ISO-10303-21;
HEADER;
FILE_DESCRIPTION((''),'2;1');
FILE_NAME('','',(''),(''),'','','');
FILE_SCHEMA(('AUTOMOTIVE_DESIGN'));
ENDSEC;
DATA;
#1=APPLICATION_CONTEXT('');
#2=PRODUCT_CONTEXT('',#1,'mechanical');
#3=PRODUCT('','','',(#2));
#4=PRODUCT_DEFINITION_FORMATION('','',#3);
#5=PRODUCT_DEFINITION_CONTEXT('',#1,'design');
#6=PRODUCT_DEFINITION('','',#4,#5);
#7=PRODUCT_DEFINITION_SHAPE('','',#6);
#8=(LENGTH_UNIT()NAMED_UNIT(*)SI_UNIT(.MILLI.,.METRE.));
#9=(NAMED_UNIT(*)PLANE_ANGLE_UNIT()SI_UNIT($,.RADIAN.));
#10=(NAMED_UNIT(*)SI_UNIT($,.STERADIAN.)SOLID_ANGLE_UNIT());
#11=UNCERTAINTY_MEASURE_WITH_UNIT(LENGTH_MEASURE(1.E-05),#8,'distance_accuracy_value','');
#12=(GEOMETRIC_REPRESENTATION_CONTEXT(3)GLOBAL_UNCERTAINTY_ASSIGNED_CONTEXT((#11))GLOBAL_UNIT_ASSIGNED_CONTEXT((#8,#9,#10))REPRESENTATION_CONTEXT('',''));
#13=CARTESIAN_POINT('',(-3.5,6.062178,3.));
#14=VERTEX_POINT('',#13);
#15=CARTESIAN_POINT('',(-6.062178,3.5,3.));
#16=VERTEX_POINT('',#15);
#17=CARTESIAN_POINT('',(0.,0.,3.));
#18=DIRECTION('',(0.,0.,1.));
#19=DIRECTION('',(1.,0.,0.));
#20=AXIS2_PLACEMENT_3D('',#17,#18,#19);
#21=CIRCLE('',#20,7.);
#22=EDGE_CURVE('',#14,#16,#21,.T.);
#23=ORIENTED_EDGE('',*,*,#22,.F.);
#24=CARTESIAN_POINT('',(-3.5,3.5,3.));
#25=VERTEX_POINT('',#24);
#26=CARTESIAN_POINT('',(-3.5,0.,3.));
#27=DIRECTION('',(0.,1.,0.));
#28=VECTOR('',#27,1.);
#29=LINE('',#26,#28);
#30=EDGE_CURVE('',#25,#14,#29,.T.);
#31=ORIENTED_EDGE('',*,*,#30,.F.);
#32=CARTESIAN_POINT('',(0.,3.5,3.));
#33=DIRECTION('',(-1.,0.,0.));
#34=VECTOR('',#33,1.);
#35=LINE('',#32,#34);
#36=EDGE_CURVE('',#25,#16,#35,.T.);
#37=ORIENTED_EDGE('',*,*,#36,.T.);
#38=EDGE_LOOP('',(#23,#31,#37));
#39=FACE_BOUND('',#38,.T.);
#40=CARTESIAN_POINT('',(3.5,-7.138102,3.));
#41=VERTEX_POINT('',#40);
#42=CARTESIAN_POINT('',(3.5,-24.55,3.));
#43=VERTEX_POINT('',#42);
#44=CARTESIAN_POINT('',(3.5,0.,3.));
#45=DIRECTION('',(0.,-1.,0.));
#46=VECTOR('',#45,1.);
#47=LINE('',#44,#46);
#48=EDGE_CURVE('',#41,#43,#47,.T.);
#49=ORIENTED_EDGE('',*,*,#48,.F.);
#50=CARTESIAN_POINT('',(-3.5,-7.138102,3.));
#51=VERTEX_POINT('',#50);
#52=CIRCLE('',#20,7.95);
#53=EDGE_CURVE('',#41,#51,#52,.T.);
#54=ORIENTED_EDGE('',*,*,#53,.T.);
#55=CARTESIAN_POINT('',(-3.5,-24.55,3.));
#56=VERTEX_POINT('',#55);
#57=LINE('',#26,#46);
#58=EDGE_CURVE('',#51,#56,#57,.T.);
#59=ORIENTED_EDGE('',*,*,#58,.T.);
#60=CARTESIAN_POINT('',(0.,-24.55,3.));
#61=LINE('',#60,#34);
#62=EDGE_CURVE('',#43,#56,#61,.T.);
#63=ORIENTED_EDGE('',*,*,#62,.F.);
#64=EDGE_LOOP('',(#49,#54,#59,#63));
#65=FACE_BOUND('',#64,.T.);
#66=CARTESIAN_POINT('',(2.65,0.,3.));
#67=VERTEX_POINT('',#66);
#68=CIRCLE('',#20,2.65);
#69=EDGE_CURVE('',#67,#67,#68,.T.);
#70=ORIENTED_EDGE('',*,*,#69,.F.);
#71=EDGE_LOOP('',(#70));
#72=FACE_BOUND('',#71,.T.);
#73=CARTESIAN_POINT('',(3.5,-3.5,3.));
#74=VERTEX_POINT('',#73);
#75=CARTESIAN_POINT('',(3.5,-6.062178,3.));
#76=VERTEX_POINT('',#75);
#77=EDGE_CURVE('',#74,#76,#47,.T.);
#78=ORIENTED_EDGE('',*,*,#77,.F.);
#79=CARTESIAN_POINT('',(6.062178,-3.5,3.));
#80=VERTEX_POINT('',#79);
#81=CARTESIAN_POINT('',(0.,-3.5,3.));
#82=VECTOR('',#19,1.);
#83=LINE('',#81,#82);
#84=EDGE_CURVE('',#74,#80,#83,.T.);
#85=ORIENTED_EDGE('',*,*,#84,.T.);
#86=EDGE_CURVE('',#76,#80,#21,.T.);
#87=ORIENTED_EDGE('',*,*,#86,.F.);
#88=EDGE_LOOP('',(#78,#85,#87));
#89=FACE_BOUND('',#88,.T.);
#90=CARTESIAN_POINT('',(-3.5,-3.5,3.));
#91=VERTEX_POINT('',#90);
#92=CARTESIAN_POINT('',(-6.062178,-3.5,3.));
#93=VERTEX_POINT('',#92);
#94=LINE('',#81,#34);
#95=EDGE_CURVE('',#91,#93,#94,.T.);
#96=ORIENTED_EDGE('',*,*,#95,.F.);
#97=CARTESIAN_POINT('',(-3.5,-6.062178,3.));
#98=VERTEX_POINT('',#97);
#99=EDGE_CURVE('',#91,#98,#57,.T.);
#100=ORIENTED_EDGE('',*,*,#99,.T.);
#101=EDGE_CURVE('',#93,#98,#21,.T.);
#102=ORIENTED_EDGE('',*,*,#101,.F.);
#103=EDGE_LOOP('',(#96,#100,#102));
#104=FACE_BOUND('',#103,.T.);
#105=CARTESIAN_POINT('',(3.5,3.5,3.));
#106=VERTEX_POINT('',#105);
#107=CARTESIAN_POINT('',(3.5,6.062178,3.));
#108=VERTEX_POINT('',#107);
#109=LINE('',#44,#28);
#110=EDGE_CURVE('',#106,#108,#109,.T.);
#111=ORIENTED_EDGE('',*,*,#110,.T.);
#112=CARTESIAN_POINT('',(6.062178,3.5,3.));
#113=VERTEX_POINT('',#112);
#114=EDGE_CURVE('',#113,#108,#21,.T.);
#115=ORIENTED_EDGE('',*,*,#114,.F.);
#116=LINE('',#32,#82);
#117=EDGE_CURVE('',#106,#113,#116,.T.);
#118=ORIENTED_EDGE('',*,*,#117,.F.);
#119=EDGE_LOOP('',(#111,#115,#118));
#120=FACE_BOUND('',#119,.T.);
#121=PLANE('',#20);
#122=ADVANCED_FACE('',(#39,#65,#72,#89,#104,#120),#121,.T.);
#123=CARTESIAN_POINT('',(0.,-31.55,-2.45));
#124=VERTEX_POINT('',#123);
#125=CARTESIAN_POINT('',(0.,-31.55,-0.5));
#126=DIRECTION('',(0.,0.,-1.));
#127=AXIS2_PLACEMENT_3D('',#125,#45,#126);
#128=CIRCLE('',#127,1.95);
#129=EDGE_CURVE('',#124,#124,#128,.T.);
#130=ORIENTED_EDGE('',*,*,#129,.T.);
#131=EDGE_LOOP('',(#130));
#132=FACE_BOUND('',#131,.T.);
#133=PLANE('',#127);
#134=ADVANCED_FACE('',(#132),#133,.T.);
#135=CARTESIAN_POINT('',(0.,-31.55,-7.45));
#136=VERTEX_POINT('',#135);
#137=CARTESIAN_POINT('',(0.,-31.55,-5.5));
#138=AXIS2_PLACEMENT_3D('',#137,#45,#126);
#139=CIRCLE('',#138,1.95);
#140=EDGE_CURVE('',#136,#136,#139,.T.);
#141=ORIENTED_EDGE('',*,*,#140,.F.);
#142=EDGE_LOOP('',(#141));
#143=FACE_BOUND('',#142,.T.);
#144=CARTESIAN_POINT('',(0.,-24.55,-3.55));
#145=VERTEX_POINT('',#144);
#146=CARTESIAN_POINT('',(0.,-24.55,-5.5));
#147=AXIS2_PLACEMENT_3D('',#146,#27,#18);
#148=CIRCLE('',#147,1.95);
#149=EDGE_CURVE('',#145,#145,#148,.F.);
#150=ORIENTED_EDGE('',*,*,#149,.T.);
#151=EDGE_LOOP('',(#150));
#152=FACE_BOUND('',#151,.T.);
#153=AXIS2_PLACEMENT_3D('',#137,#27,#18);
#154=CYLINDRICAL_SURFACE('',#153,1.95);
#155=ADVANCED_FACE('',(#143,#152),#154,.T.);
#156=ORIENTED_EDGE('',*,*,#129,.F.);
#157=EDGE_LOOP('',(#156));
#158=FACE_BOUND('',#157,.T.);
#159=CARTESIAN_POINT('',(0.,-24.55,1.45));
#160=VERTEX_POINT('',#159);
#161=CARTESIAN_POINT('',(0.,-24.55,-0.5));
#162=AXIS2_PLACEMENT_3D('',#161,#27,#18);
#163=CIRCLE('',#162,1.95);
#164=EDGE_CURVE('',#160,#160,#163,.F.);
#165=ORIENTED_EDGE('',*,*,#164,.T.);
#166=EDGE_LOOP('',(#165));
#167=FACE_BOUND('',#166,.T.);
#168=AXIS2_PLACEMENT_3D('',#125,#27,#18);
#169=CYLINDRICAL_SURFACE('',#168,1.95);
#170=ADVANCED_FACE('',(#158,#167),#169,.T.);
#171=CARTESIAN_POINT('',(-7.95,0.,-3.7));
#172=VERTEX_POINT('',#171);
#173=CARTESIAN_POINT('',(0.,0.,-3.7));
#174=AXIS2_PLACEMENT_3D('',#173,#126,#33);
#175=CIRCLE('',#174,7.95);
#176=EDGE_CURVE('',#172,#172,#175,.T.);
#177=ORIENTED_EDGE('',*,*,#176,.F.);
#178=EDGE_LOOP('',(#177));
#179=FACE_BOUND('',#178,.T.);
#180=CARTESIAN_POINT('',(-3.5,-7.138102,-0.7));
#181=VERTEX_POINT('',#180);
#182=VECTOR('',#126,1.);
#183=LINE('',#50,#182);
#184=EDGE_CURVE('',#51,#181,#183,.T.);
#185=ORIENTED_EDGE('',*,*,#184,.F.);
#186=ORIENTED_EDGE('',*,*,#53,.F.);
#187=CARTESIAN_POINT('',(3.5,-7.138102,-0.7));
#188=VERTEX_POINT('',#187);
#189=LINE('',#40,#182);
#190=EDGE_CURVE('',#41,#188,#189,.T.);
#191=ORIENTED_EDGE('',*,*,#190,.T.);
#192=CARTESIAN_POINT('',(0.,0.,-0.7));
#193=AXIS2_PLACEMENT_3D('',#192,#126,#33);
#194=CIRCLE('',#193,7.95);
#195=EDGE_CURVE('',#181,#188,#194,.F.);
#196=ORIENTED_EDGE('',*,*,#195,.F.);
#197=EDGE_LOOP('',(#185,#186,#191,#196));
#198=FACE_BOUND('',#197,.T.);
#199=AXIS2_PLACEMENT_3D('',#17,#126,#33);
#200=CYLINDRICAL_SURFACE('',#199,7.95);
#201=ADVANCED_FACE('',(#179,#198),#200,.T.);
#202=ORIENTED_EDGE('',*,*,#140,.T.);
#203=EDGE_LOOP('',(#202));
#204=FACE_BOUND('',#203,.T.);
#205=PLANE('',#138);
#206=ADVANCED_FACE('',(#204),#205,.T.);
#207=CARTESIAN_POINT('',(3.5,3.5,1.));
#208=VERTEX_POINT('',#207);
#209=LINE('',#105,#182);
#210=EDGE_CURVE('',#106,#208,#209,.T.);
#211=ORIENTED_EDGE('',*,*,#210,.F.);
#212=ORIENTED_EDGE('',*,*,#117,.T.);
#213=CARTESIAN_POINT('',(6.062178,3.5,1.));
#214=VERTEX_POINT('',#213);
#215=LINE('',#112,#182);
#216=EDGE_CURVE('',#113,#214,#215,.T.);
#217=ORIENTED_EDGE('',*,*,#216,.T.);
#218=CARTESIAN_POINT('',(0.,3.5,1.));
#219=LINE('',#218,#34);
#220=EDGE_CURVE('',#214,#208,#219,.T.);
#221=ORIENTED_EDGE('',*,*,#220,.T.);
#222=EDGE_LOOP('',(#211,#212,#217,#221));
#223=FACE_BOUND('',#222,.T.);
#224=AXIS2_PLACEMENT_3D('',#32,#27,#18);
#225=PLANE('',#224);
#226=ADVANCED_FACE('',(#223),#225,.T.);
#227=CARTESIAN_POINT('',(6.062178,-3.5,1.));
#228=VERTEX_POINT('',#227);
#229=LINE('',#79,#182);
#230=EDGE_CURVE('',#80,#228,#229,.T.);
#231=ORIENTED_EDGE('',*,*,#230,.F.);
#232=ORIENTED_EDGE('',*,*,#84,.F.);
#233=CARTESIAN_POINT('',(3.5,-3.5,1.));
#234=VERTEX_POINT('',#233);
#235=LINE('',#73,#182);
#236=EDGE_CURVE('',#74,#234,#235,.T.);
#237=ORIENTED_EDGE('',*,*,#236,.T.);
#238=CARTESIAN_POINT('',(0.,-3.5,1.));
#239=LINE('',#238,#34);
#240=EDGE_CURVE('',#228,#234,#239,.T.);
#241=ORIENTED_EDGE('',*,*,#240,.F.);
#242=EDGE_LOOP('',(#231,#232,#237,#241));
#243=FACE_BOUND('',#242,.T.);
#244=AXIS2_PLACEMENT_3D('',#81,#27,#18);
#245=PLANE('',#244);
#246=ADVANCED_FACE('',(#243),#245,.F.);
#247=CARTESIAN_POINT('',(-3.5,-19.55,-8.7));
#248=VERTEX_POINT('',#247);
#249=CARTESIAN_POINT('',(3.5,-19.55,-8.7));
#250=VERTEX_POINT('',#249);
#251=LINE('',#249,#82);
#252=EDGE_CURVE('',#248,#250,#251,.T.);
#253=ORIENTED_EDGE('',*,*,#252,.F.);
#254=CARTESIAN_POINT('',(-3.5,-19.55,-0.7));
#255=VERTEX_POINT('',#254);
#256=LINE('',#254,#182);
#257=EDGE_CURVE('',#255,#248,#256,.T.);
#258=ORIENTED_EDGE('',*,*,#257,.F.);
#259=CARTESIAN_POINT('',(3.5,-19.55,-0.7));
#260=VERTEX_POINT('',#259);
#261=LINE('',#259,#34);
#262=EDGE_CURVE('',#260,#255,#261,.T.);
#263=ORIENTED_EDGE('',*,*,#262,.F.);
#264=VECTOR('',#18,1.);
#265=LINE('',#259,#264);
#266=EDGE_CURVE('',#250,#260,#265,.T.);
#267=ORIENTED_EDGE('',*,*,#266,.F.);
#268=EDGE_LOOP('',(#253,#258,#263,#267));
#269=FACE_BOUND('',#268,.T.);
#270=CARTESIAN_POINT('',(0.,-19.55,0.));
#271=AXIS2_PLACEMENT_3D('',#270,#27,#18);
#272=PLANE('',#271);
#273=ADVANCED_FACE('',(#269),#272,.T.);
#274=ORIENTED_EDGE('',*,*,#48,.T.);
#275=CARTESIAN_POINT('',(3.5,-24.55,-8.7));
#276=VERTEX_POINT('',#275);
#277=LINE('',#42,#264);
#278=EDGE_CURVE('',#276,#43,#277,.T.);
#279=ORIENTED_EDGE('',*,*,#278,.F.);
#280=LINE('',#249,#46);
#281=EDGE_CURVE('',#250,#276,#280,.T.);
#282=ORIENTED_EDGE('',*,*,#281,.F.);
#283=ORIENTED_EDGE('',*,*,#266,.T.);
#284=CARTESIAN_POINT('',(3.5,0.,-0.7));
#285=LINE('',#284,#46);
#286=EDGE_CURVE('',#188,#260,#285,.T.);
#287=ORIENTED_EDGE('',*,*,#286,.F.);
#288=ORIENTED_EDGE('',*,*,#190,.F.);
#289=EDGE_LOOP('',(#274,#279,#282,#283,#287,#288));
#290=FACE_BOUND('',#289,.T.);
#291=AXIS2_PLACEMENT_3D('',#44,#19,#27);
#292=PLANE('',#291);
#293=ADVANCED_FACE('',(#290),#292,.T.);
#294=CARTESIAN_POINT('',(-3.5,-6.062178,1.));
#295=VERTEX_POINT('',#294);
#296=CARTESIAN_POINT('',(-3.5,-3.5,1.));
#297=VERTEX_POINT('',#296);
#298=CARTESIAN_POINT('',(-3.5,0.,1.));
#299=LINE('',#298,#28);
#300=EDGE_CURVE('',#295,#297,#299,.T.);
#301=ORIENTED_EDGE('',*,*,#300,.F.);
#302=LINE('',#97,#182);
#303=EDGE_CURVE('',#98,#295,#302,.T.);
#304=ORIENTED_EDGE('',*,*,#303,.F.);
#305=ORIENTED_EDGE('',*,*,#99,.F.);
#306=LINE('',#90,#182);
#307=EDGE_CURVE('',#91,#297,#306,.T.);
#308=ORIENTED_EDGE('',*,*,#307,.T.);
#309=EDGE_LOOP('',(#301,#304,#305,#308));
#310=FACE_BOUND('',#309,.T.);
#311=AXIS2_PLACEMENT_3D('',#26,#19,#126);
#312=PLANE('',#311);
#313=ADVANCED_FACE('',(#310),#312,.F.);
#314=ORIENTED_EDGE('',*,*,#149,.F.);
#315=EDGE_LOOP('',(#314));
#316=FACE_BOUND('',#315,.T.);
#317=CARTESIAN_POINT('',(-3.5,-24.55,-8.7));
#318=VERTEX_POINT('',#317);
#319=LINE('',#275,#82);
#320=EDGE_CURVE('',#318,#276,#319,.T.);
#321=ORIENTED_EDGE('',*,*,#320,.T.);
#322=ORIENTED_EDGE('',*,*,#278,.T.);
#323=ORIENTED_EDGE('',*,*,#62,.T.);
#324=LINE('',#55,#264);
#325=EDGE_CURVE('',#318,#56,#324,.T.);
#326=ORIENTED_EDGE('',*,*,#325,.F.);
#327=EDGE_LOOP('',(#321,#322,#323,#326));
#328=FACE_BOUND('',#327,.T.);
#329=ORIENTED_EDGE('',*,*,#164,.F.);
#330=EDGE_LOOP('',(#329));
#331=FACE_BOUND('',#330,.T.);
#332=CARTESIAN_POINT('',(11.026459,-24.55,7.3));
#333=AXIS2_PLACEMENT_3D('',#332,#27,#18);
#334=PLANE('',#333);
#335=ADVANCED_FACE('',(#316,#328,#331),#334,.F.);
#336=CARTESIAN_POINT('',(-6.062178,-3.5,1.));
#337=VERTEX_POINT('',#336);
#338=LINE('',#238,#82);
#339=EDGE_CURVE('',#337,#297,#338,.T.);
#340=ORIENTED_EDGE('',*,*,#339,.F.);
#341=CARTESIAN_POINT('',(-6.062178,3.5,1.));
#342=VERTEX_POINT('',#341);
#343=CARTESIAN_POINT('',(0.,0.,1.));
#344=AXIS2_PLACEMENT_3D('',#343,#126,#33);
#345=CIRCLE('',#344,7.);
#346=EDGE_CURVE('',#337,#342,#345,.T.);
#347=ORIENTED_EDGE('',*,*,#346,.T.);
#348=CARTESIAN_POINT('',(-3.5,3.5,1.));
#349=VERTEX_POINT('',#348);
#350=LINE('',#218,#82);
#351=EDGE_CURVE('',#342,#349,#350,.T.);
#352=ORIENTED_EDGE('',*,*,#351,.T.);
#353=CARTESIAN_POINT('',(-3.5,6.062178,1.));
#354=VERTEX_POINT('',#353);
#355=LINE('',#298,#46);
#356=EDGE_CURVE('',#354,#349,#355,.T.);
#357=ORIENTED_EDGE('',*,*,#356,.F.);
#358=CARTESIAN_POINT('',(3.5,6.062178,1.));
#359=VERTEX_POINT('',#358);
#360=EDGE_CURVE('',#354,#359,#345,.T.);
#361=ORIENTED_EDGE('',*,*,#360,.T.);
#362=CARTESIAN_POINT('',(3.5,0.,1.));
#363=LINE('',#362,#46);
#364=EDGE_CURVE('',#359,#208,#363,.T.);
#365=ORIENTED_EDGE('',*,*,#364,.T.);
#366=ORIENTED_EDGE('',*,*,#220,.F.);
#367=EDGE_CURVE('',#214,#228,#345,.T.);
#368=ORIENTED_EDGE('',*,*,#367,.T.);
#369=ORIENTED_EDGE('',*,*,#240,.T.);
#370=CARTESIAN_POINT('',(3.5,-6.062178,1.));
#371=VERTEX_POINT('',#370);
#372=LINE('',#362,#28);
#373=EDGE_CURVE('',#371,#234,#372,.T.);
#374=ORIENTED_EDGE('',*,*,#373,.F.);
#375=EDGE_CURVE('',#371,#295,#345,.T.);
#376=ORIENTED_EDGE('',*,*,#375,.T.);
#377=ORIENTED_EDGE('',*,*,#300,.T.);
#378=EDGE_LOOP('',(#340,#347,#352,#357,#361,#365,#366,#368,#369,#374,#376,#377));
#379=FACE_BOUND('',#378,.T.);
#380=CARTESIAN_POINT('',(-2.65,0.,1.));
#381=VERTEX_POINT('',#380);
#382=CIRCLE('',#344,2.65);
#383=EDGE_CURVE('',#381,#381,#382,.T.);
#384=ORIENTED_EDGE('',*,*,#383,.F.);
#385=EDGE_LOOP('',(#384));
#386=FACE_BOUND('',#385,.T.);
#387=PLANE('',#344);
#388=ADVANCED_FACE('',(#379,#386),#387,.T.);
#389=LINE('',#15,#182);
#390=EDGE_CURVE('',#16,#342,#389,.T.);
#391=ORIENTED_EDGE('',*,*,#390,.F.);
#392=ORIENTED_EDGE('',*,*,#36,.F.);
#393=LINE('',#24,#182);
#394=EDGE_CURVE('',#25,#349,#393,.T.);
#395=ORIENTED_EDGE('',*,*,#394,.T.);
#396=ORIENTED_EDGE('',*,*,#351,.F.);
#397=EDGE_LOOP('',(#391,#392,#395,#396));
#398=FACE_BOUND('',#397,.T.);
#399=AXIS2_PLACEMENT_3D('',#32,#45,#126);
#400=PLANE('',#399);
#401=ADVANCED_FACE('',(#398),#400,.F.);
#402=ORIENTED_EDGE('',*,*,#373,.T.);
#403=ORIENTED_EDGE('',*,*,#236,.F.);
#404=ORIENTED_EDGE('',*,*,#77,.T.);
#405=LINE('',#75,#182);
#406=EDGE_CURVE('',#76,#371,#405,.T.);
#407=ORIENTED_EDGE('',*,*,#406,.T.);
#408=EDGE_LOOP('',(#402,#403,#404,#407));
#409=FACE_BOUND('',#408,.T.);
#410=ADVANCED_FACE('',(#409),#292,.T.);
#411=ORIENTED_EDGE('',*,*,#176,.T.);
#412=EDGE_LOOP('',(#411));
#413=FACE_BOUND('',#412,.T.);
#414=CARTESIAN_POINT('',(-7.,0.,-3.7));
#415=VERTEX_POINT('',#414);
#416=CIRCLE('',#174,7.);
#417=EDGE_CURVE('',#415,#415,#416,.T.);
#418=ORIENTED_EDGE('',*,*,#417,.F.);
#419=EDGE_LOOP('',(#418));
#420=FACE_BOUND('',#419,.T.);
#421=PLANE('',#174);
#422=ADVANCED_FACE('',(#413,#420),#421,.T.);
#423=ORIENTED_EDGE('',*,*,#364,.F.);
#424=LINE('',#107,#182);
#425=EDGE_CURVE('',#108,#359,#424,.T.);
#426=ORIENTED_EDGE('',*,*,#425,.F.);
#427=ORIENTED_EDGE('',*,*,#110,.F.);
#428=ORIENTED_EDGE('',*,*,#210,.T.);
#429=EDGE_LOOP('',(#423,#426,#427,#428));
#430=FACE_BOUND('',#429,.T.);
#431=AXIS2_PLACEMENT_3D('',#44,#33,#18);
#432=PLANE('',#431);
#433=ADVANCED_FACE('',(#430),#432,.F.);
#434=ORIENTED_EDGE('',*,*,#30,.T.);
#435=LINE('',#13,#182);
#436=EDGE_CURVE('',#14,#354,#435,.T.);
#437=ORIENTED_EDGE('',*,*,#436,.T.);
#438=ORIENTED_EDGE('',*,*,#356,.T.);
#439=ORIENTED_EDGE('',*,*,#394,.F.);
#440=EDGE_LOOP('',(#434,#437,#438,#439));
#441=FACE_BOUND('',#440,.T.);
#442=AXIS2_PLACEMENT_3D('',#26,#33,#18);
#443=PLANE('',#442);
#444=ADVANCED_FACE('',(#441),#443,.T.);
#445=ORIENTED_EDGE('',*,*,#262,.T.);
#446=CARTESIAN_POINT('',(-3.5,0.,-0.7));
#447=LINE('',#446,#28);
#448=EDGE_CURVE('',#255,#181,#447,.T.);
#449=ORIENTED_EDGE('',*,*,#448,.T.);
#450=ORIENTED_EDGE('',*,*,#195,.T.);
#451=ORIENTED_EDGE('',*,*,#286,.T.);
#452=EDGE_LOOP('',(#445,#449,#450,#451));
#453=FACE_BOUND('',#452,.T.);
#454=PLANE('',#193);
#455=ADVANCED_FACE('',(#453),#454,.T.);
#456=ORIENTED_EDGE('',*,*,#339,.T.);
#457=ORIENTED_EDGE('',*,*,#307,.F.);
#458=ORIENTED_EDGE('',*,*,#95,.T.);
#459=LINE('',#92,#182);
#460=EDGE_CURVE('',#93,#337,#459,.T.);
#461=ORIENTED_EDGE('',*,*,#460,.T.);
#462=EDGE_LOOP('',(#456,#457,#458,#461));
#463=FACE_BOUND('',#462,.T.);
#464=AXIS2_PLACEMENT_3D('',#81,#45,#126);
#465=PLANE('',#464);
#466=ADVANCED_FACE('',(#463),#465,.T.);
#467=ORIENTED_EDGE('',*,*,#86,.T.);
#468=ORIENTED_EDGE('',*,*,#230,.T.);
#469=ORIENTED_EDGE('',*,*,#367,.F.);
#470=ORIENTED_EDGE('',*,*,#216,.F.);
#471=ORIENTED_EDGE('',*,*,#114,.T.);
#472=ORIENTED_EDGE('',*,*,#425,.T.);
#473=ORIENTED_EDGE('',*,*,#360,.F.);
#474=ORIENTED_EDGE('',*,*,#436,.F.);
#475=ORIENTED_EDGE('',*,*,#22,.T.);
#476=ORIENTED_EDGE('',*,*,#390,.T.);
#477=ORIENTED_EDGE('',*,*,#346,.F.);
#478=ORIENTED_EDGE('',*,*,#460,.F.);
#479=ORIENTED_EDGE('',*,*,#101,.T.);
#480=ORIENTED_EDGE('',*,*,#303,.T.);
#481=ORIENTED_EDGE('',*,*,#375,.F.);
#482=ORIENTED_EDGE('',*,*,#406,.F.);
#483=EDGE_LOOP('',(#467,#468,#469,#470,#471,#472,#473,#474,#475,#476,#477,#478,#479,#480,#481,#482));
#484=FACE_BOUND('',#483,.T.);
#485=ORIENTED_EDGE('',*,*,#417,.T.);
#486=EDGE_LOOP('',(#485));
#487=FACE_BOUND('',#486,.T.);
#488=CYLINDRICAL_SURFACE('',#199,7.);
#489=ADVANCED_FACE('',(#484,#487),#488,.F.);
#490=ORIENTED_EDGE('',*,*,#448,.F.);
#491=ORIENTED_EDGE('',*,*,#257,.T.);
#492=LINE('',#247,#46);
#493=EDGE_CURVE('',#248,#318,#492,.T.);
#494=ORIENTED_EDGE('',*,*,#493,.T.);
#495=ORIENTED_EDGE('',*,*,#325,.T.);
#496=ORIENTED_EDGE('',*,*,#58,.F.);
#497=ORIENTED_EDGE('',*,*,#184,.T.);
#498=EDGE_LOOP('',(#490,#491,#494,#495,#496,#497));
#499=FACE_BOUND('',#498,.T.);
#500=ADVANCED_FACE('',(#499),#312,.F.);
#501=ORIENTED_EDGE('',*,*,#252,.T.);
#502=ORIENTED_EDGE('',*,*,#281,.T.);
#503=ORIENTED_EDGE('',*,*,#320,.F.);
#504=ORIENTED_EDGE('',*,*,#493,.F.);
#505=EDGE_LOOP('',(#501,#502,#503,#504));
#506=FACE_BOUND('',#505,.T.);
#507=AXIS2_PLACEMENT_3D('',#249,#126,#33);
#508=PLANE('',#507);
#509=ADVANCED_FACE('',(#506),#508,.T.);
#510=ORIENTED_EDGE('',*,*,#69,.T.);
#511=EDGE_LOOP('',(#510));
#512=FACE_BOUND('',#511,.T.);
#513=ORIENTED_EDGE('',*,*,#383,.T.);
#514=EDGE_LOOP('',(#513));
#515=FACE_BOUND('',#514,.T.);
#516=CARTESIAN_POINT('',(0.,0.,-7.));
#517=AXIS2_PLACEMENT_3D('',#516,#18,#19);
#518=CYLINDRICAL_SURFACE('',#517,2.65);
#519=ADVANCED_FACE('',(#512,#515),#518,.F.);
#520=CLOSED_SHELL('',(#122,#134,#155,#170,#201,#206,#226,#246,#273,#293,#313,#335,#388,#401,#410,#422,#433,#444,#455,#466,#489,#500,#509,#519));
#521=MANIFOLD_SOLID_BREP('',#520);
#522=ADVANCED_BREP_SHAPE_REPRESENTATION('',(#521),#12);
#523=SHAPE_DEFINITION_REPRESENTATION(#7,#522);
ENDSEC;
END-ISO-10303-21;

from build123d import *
from build123d.topology import SkipClean

# Parameters (mm, degrees)
SKETCH1_R            = 1.5
BOSS_EXTRUDE4_DEPTH  = 3
BOSS_EXTRUDE5_START  = 3
SKETCH3_R            = 7.95
SKETCH3_R_2          = 1.5
BOSS_EXTRUDE5_DEPTH  = 3
SKETCH4_R            = 2.5
CUT_EXTRUDE1_DEPTH   = 1.5
SKETCH5_R            = 7
CUT_EXTRUDE2_DEPTH   = 4
SKETCH6_R            = 7.95
CUT_EXTRUDE3_DEPTH   = 1
SKETCH7_R            = 2.5
CUT_EXTRUDE4_DEPTH   = 0.5
BOSS_EXTRUDE6_START  = 0.7
SKETCH8_R            = 7.95
SKETCH8_R_2          = 7
BOSS_EXTRUDE6_DEPTH  = 0.7
BOSS_EXTRUDE8_START  = 0.7
SKETCH9_R            = 7.95
SKETCH9_R_2          = 1.5
BOSS_EXTRUDE8_DEPTH  = 0.7
BOSS_EXTRUDE9_START  = 0.7
BOSS_EXTRUDE9_DEPTH  = 0.7
SKETCH15_R           = 7
SKETCH15_R_2         = 4.949747468
BOSS_EXTRUDE12_DEPTH = 5.7
SKETCH16_W           = 7
SKETCH16_H           = 7
CUT_EXTRUDE7_DEPTH   = 5.7
SKETCH17_W           = 21.103619628
SKETCH17_H           = 19.457314619
CUT_EXTRUDE8_DEPTH   = 10
SKETCH18_W           = 7
SKETCH18_H           = 8
BOSS_EXTRUDE13_DEPTH = 5
SKETCH19_R           = 1.95
BOSS_EXTRUDE14_DEPTH = 7
SKETCH20_R           = 2.65
CUT_EXTRUDE9_DEPTH   = 10


with BuildPart() as part:
    # Sketch1 → Boss-Extrude4 (new body)
    with BuildSketch(Plane.XY):
        with BuildLine():
            Line((-3.5, -7.138101989), (-3.5, -27.861898011))
            ThreePointArc((-3.5, -27.861898011), (0, -42.95), (3.5, -27.861898011))
            Line((3.5, -27.861898011), (3.5, -7.138101989))
            ThreePointArc((3.5, -7.138101989), (0, 7.95), (-3.5, -7.138101989))
        make_face()
        with BuildLine():
            Line((-3.5, 6.062177826), (-3.5, 3.5))
            Line((-3.5, 3.5), (-6.062177826, 3.5))
            ThreePointArc((-6.062177826, 3.5), (-4.949747468, 4.949747468), (-3.5, 6.062177826))
        make_face(mode=Mode.SUBTRACT)
        with BuildLine():
            Line((3.5, 3.5), (3.5, 6.062177826))
            ThreePointArc((3.5, 6.062177826), (4.949747468, 4.949747468), (6.062177826, 3.5))
            Line((6.062177826, 3.5), (3.5, 3.5))
        make_face(mode=Mode.SUBTRACT)
        Circle(SKETCH1_R, mode=Mode.SUBTRACT)
        with BuildLine():
            Line((-6.062177826, -3.5), (-3.5, -3.5))
            Line((-3.5, -3.5), (-3.5, -6.062177826))
            ThreePointArc((-3.5, -6.062177826), (-4.949747468, -4.949747468), (-6.062177826, -3.5))
        make_face(mode=Mode.SUBTRACT)
        with BuildLine():
            Line((3.5, -3.5), (6.062177826, -3.5))
            ThreePointArc((6.062177826, -3.5), (4.949747468, -4.949747468), (3.5, -6.062177826))
            Line((3.5, -6.062177826), (3.5, -3.5))
        make_face(mode=Mode.SUBTRACT)
        with BuildLine():
            ThreePointArc((3.5, -28.937822174), (4.949747468, -30.050252532), (6.062177826, -31.5))
            Line((6.062177826, -31.5), (3.5, -31.5))
            Line((3.5, -31.5), (3.5, -28.937822174))
        make_face(mode=Mode.SUBTRACT)
        with BuildLine():
            Line((-3.5, -28.937822174), (-3.5, -31.5))
            Line((-3.5, -31.5), (-6.062177826, -31.5))
            ThreePointArc((-6.062177826, -31.5), (-4.949747468, -30.050252532), (-3.5, -28.937822174))
        make_face(mode=Mode.SUBTRACT)
        with BuildLine():
            ThreePointArc((-3.5, -41.062177826), (-4.949747468, -39.949747468), (-6.062177826, -38.5))
            Line((-6.062177826, -38.5), (-3.5, -38.5))
            Line((-3.5, -38.5), (-3.5, -41.062177826))
        make_face(mode=Mode.SUBTRACT)
        with BuildLine():
            ThreePointArc((6.062177826, -38.5), (4.949747468, -39.949747468), (3.5, -41.062177826))
            Line((3.5, -41.062177826), (3.5, -38.5))
            Line((3.5, -38.5), (6.062177826, -38.5))
        make_face(mode=Mode.SUBTRACT)
        with Locations((0, -35)):
            Circle(SKETCH1_R, mode=Mode.SUBTRACT)
    extrude(amount=BOSS_EXTRUDE4_DEPTH)

    # Sketch3 → Boss-Extrude5 (add)
    # profile 1 of 2: a face of its own
    with SkipClean():  # the faces are left unmerged after this step: merging them gives an invalid solid
        with BuildSketch(Plane(origin=(0, 0, 0), x_dir=(-1, 0, 0), z_dir=(0, 0, -1)).offset(BOSS_EXTRUDE5_START)):
            Circle(SKETCH3_R)
            with BuildLine():
                Line((3.5, 3.5), (3.5, 6.062177826))
                ThreePointArc((3.5, 6.062177826), (4.949747468, 4.949747468), (6.062177826, 3.5))
                Line((6.062177826, 3.5), (3.5, 3.5))
            make_face(mode=Mode.SUBTRACT)
            with BuildLine():
                Line((3.5, -3.5), (6.062177826, -3.5))
                ThreePointArc((6.062177826, -3.5), (4.949747468, -4.949747468), (3.5, -6.062177826))
                Line((3.5, -6.062177826), (3.5, -3.5))
            make_face(mode=Mode.SUBTRACT)
            with BuildLine():
                Line((-3.5, -3.5), (-3.5, -6.062177826))
                ThreePointArc((-3.5, -6.062177826), (-4.949747468, -4.949747468), (-6.062177826, -3.5))
                Line((-6.062177826, -3.5), (-3.5, -3.5))
            make_face(mode=Mode.SUBTRACT)
            with BuildLine():
                Line((-3.5, 3.5), (-6.062177826, 3.5))
                ThreePointArc((-6.062177826, 3.5), (-4.949747468, 4.949747468), (-3.5, 6.062177826))
                Line((-3.5, 6.062177826), (-3.5, 3.5))
            make_face(mode=Mode.SUBTRACT)
            Circle(SKETCH3_R_2, mode=Mode.SUBTRACT)
        # profile 2 of 2: a face of its own
        with BuildSketch(Plane(origin=(0, 0, 0), x_dir=(-1, 0, 0), z_dir=(0, 0, -1)).offset(BOSS_EXTRUDE5_START)):
            with Locations((0, -35)):
                Circle(SKETCH3_R)
            with BuildLine():
                Line((-3.5, -38.5), (-3.5, -41.062177826))
                ThreePointArc((-3.5, -41.062177826), (-4.949747468, -39.949747468), (-6.062177826, -38.5))
                Line((-6.062177826, -38.5), (-3.5, -38.5))
            make_face(mode=Mode.SUBTRACT)
            with BuildLine():
                Line((-3.5, -31.5), (-6.062177826, -31.5))
                ThreePointArc((-6.062177826, -31.5), (-4.949747468, -30.050252532), (-3.5, -28.937822174))
                Line((-3.5, -28.937822174), (-3.5, -31.5))
            make_face(mode=Mode.SUBTRACT)
            with BuildLine():
                Line((3.5, -31.5), (3.5, -28.937822174))
                ThreePointArc((3.5, -28.937822174), (4.949747468, -30.050252532), (6.062177826, -31.5))
                Line((6.062177826, -31.5), (3.5, -31.5))
            make_face(mode=Mode.SUBTRACT)
            with BuildLine():
                Line((3.5, -38.5), (6.062177826, -38.5))
                ThreePointArc((6.062177826, -38.5), (4.949747468, -39.949747468), (3.5, -41.062177826))
                Line((3.5, -41.062177826), (3.5, -38.5))
            make_face(mode=Mode.SUBTRACT)
            with Locations((0, -35)):
                Circle(SKETCH3_R_2, mode=Mode.SUBTRACT)
        extrude(amount=-BOSS_EXTRUDE5_DEPTH)

    # Sketch4 → Cut-Extrude1 (cut)
    with SkipClean():  # the faces are left unmerged after this step: merging them gives an invalid solid
        with BuildSketch(Plane.XY.offset(3)):
            with Locations((0, -35)):
                Circle(SKETCH4_R)
            Circle(SKETCH4_R)
        extrude(amount=-CUT_EXTRUDE1_DEPTH, mode=Mode.SUBTRACT)

    # Sketch5 → Cut-Extrude2 (cut)
    with SkipClean():  # the faces are left unmerged after this step: merging them gives an invalid solid
        with BuildSketch(Plane(origin=(0, 0, -3), x_dir=(-1, 0, 0), z_dir=(0, 0, -1))):
            Circle(SKETCH5_R)
        extrude(amount=-CUT_EXTRUDE2_DEPTH, mode=Mode.SUBTRACT)
    add(part.part.scale(1), mode=Mode.REPLACE)  # the faces are merged on a copy

    # Sketch6 → Cut-Extrude3 (cut)
    with BuildSketch(Plane(origin=(0, 0, -3), x_dir=(-1, 0, 0), z_dir=(0, 0, -1))):
        with Locations((0, -35)):
            Circle(SKETCH6_R)
    extrude(amount=-CUT_EXTRUDE3_DEPTH, mode=Mode.SUBTRACT)

    # Sketch7 → Cut-Extrude4 (cut)
    with BuildSketch(Plane.XY.offset(1.5)):
        with Locations((0, -35)):
            Circle(SKETCH7_R)
    extrude(amount=-CUT_EXTRUDE4_DEPTH, mode=Mode.SUBTRACT)

    # Sketch8 → Boss-Extrude6 (add)
    with BuildSketch(Plane(origin=(0, 0, -3), x_dir=(-1, 0, 0), z_dir=(0, 0, -1)).offset(BOSS_EXTRUDE6_START)):
        Circle(SKETCH8_R)
        Circle(SKETCH8_R_2, mode=Mode.SUBTRACT)
    extrude(amount=-BOSS_EXTRUDE6_DEPTH)

    # Sketch9 → Boss-Extrude8 (add)
    with SkipClean():  # the faces are left unmerged after this step: merging them gives an invalid solid
        with BuildSketch(Plane(origin=(0, 0, -2), x_dir=(-1, 0, 0), z_dir=(0, 0, -1)).offset(BOSS_EXTRUDE8_START)):
            with Locations((0, -35)):
                Circle(SKETCH9_R)
            with BuildLine():
                Line((3.5, -31.5), (3.5, -28.937822174))
                ThreePointArc((3.5, -28.937822174), (4.949747468, -30.050252532), (6.062177826, -31.5))
                Line((6.062177826, -31.5), (3.5, -31.5))
            make_face(mode=Mode.SUBTRACT)
            with BuildLine():
                Line((3.5, -38.5), (6.062177826, -38.5))
                ThreePointArc((6.062177826, -38.5), (4.949747468, -39.949747468), (3.5, -41.062177826))
                Line((3.5, -41.062177826), (3.5, -38.5))
            make_face(mode=Mode.SUBTRACT)
            with BuildLine():
                Line((-3.5, -38.5), (-3.5, -41.062177826))
                ThreePointArc((-3.5, -41.062177826), (-4.949747468, -39.949747468), (-6.062177826, -38.5))
                Line((-6.062177826, -38.5), (-3.5, -38.5))
            make_face(mode=Mode.SUBTRACT)
            with BuildLine():
                Line((-3.5, -31.5), (-6.062177826, -31.5))
                ThreePointArc((-6.062177826, -31.5), (-4.949747468, -30.050252532), (-3.5, -28.937822174))
                Line((-3.5, -28.937822174), (-3.5, -31.5))
            make_face(mode=Mode.SUBTRACT)
            with Locations((0, -35)):
                Circle(SKETCH9_R_2, mode=Mode.SUBTRACT)
        extrude(amount=-BOSS_EXTRUDE8_DEPTH)

    # Sketch10 → Boss-Extrude9 (add)
    with SkipClean():  # the faces are left unmerged after this step: merging them gives an invalid solid
        with BuildSketch(Plane(origin=(0, 0, 0), x_dir=(-1, 0, 0), z_dir=(0, 0, -1)).offset(BOSS_EXTRUDE9_START)):
            with BuildLine():
                ThreePointArc((3.5, -7.138101989), (0, -7.95), (-3.5, -7.138101989))
                Line((-3.5, -7.138101989), (-3.5, -27.861898011))
                ThreePointArc((-3.5, -27.861898011), (0, -27.05), (3.5, -27.861898011))
                Line((3.5, -27.861898011), (3.5, -7.138101989))
            make_face()
        extrude(amount=-BOSS_EXTRUDE9_DEPTH)

    # Sketch15 → Boss-Extrude12 (add)
    with SkipClean():  # the faces are left unmerged after this step: merging them gives an invalid solid
        with BuildSketch(Plane(origin=(0, 0, -2.7), x_dir=(-1, 0, 0), z_dir=(0, 0, -1))):
            with Locations((0, -35)):
                Circle(SKETCH15_R)
            with Locations((0, -35)):
                Circle(SKETCH15_R_2, mode=Mode.SUBTRACT)
        extrude(amount=-BOSS_EXTRUDE12_DEPTH)

    # Sketch16 → Cut-Extrude7 (cut)
    with SkipClean():  # the faces are left unmerged after this step: merging them gives an invalid solid
        with BuildSketch(Plane(origin=(0, 0, -2.7), x_dir=(-1, 0, 0), z_dir=(0, 0, -1))):
            with Locations((0, -35)):
                Rectangle(SKETCH16_W, SKETCH16_H)
        extrude(amount=-CUT_EXTRUDE7_DEPTH, mode=Mode.SUBTRACT)

    # Sketch17 → Cut-Extrude8 (cut)
    with SkipClean():  # the faces are left unmerged after this step: merging them gives an invalid solid
        with BuildSketch(Plane(origin=(0, 0, -2.7), x_dir=(-1, 0, 0), z_dir=(0, 0, -1))):
            with Locations((-0.474648884, -34.27865731)):
                Rectangle(SKETCH17_W, SKETCH17_H)
        extrude(amount=-CUT_EXTRUDE8_DEPTH, mode=Mode.SUBTRACT)

    # Sketch18 → Boss-Extrude13 (add)
    with SkipClean():  # the faces are left unmerged after this step: merging them gives an invalid solid
        with BuildSketch(Plane.XZ.offset(24.55)):
            with Locations((0, -4.7)):
                Rectangle(SKETCH18_W, SKETCH18_H)
        extrude(amount=-BOSS_EXTRUDE13_DEPTH)

    # Sketch19 → Boss-Extrude14 (add)
    with SkipClean():  # the faces are left unmerged after this step: merging them gives an invalid solid
        with BuildSketch(Plane.XZ.offset(24.55)):
            with Locations((0, -5.5)):
                Circle(SKETCH19_R)
            with Locations((0, -0.5)):
                Circle(SKETCH19_R)
        extrude(amount=BOSS_EXTRUDE14_DEPTH)

    # Sketch20 → Cut-Extrude9 (cut)
    with SkipClean():  # the faces are left unmerged after this step: merging them gives an invalid solid
        with BuildSketch(Plane.XY.offset(3)):
            Circle(SKETCH20_R)
        extrude(amount=-CUT_EXTRUDE9_DEPTH, mode=Mode.SUBTRACT)


solid = part.part
